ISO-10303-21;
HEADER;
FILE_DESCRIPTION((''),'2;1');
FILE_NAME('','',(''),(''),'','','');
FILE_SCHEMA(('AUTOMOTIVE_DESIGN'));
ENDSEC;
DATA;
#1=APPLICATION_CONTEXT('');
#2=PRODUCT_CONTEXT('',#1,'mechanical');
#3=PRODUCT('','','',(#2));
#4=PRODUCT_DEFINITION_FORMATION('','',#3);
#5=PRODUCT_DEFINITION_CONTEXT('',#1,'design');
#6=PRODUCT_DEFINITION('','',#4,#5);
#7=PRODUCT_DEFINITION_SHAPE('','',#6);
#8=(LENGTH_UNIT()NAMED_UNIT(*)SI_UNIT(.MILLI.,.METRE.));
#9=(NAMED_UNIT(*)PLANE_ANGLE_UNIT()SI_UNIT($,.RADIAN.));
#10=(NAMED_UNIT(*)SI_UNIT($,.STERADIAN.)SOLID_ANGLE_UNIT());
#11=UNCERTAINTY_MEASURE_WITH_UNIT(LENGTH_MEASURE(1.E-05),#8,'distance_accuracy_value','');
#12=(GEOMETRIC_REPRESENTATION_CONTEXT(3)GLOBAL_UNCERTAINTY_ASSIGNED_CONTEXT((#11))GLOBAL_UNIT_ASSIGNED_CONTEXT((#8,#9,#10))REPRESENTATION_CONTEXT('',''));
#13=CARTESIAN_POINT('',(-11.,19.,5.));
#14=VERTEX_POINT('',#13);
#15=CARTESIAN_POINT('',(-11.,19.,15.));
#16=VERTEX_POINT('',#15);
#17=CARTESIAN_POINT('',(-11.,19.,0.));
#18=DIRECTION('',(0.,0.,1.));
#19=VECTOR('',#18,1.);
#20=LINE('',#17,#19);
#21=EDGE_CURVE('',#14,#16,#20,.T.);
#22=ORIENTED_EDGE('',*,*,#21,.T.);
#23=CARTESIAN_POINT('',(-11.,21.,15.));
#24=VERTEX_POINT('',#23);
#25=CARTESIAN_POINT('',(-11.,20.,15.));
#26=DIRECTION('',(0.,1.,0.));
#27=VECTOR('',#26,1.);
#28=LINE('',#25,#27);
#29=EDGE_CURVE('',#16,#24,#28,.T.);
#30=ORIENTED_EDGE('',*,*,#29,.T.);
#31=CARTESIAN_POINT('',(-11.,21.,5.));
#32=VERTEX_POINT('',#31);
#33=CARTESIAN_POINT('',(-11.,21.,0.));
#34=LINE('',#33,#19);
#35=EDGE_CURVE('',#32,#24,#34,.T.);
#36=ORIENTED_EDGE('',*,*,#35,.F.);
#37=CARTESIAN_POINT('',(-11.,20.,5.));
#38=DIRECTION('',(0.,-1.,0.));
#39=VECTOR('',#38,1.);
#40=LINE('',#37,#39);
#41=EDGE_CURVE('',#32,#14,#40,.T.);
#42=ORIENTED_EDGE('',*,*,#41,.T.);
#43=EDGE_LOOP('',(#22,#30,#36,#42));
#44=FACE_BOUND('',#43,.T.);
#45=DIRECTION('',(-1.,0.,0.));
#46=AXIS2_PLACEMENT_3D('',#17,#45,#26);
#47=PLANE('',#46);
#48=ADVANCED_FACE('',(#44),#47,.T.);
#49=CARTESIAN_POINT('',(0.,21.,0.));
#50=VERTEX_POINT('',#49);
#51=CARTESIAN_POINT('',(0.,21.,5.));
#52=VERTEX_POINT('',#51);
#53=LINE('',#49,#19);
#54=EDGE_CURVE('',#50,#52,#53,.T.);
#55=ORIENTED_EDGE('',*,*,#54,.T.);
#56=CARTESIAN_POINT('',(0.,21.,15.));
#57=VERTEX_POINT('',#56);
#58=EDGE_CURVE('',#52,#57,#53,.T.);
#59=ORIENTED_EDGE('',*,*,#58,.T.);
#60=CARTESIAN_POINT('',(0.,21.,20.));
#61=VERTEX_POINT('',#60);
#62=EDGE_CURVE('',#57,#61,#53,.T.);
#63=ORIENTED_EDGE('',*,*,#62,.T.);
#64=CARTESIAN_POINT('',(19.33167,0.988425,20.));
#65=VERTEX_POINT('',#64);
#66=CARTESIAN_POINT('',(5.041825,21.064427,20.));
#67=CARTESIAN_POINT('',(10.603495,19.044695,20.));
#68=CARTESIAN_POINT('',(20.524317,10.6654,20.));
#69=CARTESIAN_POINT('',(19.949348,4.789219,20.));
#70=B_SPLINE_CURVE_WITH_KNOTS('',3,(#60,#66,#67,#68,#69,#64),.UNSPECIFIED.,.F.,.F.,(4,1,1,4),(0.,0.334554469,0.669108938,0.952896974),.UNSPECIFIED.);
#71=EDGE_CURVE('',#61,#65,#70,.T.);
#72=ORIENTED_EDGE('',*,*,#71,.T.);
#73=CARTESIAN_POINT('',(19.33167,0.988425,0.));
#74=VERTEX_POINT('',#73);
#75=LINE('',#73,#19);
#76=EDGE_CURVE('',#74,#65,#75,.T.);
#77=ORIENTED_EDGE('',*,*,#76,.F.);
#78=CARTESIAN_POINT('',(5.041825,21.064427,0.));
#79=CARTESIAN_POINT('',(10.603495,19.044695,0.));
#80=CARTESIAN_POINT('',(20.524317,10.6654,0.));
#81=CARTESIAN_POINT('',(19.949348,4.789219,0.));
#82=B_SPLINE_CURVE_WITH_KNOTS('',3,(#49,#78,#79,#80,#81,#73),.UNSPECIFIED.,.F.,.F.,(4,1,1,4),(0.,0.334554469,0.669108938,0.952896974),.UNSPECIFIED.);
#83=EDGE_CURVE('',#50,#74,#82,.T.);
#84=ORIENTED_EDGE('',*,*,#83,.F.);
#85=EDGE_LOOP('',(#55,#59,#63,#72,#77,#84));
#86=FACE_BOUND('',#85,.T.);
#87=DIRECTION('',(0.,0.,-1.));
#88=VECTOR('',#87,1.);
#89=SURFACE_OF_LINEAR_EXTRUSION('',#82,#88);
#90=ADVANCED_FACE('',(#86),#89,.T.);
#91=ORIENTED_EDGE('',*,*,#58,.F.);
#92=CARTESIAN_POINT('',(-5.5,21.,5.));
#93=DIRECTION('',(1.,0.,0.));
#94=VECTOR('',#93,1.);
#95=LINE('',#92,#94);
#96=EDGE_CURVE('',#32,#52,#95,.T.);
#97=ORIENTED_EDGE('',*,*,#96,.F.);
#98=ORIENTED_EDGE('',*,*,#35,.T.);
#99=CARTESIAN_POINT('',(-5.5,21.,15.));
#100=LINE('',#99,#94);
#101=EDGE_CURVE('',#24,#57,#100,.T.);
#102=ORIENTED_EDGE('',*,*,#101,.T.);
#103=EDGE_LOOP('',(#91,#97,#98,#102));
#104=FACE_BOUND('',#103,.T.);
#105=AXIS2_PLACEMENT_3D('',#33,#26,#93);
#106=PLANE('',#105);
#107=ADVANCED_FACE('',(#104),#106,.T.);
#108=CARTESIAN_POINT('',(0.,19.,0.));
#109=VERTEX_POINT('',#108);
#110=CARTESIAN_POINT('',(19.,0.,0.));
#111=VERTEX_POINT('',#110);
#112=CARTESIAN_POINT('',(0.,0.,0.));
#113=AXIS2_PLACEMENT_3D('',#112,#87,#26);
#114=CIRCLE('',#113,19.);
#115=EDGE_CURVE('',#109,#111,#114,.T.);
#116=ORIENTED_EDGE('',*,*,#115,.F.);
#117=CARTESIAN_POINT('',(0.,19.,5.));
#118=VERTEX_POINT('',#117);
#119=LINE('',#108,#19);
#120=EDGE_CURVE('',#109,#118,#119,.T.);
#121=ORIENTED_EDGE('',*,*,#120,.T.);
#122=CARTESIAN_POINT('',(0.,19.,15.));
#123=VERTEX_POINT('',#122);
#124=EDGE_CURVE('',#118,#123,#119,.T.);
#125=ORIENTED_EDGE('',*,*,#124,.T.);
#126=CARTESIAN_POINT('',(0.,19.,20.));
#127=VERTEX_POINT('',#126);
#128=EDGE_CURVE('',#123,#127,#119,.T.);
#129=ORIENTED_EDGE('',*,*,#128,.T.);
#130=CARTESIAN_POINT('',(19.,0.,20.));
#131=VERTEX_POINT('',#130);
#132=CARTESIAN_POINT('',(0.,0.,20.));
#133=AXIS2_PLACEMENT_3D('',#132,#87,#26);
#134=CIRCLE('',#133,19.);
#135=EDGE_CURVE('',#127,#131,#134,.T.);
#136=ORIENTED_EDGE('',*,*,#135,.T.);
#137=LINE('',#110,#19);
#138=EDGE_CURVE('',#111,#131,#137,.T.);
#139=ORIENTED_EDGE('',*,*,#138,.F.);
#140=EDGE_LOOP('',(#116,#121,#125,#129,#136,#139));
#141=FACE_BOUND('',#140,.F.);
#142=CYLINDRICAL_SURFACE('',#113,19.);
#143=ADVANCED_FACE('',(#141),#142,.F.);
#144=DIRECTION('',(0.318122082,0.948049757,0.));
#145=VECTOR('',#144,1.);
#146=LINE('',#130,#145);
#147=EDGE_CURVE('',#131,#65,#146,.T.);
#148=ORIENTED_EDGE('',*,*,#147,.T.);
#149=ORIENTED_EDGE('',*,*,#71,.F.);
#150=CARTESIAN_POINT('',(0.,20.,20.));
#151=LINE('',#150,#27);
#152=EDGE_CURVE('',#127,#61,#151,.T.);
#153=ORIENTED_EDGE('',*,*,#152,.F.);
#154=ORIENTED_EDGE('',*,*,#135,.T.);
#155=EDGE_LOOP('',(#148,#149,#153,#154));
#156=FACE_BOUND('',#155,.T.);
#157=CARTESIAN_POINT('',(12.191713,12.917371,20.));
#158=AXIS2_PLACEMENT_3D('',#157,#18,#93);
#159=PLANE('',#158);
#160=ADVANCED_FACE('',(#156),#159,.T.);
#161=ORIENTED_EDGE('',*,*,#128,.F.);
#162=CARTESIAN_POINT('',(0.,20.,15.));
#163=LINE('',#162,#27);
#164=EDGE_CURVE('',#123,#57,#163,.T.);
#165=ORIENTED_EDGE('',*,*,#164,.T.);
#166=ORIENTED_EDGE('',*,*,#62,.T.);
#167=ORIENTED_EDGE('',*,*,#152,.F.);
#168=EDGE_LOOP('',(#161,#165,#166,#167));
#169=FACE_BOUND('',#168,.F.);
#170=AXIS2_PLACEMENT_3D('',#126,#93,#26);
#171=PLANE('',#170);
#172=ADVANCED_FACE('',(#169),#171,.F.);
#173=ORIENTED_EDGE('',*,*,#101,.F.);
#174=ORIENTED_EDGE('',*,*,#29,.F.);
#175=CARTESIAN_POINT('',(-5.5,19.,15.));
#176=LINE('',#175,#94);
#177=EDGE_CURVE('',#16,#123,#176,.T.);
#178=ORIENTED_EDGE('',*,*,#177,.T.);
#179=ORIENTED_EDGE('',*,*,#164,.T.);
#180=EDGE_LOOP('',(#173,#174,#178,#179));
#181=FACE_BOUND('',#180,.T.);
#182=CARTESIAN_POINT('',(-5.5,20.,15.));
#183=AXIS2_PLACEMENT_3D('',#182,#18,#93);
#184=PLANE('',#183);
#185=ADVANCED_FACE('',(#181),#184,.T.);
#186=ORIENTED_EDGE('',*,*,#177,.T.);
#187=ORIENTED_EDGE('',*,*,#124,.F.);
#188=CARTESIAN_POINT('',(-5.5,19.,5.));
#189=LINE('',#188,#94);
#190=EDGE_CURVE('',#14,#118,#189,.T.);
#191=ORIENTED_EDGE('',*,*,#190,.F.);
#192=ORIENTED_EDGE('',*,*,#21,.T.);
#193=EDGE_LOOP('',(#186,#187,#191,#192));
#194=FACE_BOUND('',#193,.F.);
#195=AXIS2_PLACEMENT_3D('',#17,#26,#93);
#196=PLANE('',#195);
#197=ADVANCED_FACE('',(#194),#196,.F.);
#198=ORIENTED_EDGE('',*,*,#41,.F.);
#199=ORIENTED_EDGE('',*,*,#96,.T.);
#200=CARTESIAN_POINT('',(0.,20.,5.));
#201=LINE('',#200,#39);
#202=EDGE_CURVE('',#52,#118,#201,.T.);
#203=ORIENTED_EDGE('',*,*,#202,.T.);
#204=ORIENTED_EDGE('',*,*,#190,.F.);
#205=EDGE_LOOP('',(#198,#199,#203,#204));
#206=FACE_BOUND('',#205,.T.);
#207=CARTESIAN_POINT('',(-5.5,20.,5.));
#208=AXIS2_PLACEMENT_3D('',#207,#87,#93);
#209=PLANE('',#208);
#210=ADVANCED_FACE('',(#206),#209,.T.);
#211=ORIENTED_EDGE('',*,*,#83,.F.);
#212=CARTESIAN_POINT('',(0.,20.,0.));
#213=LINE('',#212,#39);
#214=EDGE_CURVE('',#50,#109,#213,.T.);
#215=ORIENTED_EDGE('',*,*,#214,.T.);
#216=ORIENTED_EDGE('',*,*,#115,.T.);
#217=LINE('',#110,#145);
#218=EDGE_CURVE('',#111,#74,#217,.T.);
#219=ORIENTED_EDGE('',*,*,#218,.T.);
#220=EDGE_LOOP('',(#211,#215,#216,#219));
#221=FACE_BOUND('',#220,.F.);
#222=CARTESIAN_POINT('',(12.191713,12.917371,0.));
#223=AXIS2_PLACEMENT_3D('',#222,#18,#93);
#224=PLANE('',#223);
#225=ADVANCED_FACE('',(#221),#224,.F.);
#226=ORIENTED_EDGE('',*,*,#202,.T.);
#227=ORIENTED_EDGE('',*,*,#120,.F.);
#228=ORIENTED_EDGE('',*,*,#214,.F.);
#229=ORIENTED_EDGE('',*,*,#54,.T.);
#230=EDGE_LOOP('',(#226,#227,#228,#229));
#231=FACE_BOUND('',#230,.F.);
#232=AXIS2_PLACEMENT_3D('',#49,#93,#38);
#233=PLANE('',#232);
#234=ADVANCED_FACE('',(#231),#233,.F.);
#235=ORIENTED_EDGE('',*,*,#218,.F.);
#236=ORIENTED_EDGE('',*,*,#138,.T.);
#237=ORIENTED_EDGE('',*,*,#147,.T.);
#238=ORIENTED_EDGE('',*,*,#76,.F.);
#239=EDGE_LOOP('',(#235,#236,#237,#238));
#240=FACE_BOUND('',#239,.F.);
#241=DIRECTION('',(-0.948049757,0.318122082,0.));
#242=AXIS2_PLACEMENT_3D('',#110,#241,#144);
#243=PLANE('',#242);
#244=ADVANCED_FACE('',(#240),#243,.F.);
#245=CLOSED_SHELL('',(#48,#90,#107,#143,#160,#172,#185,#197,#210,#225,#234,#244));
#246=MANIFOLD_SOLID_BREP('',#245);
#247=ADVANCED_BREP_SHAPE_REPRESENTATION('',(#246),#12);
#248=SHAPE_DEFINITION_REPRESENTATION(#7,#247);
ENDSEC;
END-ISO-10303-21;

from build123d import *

# Parameters (mm, degrees)
F0_W     = 11
F0_H     = 2
F1_DEPTH = 20
F2_W     = 11
F2_H     = 2
F3_DEPTH = 5
F4_W     = 11
F4_H     = 2
F5_DEPTH = 5


# Not quite as in the source:
# - ends of sketch curves that miss each other by under 0.0002 mm in the source are joined


with BuildPart() as f1:
    # F0 (on Top) → F1 (new body)
    with BuildSketch(Plane.XY):
        with BuildLine():
            ThreePointArc((0, 19), (13.4350288425, 13.4350288425), (19, 0))
            Line((19, 0), (19.3316700079, 0.9884245321))
            add(Edge.make_bspline(
                [(0, 20.9999997169), (5.0418251194, 21.0644266307), (10.6034953843, 19.0446950586), (20.5243171722, 10.6653997718), (19.9493483466, 4.7892186912), (19.3316700079, 0.9884245321)],
                knots=[0, 0, 0, 0, 0.3345544691, 0.6691089382, 0.9528969744, 0.9528969744, 0.9528969744, 0.9528969744], degree=3))
            Line((0, 20.9999997169), (0, 19))
        make_face()
        with Locations((-5.5, 20)):
            Rectangle(F0_W, F0_H)
    extrude(amount=F1_DEPTH)

    # F2 (on face) → F3 (cut)
    with BuildSketch(Plane(origin=(0, 0, 0), x_dir=(1, 0, 0), z_dir=(0, 0, -1))):
        with Locations((-5.5, -20)):
            Rectangle(F2_W, F2_H)
    extrude(amount=-F3_DEPTH, mode=Mode.SUBTRACT)

    # F4 (on face) → F5 (cut)
    with BuildSketch(Plane.XY.offset(20)):
        with Locations((-5.5, 20)):
            Rectangle(F4_W, F4_H)
    extrude(amount=-F5_DEPTH, mode=Mode.SUBTRACT)


solid = f1.part
